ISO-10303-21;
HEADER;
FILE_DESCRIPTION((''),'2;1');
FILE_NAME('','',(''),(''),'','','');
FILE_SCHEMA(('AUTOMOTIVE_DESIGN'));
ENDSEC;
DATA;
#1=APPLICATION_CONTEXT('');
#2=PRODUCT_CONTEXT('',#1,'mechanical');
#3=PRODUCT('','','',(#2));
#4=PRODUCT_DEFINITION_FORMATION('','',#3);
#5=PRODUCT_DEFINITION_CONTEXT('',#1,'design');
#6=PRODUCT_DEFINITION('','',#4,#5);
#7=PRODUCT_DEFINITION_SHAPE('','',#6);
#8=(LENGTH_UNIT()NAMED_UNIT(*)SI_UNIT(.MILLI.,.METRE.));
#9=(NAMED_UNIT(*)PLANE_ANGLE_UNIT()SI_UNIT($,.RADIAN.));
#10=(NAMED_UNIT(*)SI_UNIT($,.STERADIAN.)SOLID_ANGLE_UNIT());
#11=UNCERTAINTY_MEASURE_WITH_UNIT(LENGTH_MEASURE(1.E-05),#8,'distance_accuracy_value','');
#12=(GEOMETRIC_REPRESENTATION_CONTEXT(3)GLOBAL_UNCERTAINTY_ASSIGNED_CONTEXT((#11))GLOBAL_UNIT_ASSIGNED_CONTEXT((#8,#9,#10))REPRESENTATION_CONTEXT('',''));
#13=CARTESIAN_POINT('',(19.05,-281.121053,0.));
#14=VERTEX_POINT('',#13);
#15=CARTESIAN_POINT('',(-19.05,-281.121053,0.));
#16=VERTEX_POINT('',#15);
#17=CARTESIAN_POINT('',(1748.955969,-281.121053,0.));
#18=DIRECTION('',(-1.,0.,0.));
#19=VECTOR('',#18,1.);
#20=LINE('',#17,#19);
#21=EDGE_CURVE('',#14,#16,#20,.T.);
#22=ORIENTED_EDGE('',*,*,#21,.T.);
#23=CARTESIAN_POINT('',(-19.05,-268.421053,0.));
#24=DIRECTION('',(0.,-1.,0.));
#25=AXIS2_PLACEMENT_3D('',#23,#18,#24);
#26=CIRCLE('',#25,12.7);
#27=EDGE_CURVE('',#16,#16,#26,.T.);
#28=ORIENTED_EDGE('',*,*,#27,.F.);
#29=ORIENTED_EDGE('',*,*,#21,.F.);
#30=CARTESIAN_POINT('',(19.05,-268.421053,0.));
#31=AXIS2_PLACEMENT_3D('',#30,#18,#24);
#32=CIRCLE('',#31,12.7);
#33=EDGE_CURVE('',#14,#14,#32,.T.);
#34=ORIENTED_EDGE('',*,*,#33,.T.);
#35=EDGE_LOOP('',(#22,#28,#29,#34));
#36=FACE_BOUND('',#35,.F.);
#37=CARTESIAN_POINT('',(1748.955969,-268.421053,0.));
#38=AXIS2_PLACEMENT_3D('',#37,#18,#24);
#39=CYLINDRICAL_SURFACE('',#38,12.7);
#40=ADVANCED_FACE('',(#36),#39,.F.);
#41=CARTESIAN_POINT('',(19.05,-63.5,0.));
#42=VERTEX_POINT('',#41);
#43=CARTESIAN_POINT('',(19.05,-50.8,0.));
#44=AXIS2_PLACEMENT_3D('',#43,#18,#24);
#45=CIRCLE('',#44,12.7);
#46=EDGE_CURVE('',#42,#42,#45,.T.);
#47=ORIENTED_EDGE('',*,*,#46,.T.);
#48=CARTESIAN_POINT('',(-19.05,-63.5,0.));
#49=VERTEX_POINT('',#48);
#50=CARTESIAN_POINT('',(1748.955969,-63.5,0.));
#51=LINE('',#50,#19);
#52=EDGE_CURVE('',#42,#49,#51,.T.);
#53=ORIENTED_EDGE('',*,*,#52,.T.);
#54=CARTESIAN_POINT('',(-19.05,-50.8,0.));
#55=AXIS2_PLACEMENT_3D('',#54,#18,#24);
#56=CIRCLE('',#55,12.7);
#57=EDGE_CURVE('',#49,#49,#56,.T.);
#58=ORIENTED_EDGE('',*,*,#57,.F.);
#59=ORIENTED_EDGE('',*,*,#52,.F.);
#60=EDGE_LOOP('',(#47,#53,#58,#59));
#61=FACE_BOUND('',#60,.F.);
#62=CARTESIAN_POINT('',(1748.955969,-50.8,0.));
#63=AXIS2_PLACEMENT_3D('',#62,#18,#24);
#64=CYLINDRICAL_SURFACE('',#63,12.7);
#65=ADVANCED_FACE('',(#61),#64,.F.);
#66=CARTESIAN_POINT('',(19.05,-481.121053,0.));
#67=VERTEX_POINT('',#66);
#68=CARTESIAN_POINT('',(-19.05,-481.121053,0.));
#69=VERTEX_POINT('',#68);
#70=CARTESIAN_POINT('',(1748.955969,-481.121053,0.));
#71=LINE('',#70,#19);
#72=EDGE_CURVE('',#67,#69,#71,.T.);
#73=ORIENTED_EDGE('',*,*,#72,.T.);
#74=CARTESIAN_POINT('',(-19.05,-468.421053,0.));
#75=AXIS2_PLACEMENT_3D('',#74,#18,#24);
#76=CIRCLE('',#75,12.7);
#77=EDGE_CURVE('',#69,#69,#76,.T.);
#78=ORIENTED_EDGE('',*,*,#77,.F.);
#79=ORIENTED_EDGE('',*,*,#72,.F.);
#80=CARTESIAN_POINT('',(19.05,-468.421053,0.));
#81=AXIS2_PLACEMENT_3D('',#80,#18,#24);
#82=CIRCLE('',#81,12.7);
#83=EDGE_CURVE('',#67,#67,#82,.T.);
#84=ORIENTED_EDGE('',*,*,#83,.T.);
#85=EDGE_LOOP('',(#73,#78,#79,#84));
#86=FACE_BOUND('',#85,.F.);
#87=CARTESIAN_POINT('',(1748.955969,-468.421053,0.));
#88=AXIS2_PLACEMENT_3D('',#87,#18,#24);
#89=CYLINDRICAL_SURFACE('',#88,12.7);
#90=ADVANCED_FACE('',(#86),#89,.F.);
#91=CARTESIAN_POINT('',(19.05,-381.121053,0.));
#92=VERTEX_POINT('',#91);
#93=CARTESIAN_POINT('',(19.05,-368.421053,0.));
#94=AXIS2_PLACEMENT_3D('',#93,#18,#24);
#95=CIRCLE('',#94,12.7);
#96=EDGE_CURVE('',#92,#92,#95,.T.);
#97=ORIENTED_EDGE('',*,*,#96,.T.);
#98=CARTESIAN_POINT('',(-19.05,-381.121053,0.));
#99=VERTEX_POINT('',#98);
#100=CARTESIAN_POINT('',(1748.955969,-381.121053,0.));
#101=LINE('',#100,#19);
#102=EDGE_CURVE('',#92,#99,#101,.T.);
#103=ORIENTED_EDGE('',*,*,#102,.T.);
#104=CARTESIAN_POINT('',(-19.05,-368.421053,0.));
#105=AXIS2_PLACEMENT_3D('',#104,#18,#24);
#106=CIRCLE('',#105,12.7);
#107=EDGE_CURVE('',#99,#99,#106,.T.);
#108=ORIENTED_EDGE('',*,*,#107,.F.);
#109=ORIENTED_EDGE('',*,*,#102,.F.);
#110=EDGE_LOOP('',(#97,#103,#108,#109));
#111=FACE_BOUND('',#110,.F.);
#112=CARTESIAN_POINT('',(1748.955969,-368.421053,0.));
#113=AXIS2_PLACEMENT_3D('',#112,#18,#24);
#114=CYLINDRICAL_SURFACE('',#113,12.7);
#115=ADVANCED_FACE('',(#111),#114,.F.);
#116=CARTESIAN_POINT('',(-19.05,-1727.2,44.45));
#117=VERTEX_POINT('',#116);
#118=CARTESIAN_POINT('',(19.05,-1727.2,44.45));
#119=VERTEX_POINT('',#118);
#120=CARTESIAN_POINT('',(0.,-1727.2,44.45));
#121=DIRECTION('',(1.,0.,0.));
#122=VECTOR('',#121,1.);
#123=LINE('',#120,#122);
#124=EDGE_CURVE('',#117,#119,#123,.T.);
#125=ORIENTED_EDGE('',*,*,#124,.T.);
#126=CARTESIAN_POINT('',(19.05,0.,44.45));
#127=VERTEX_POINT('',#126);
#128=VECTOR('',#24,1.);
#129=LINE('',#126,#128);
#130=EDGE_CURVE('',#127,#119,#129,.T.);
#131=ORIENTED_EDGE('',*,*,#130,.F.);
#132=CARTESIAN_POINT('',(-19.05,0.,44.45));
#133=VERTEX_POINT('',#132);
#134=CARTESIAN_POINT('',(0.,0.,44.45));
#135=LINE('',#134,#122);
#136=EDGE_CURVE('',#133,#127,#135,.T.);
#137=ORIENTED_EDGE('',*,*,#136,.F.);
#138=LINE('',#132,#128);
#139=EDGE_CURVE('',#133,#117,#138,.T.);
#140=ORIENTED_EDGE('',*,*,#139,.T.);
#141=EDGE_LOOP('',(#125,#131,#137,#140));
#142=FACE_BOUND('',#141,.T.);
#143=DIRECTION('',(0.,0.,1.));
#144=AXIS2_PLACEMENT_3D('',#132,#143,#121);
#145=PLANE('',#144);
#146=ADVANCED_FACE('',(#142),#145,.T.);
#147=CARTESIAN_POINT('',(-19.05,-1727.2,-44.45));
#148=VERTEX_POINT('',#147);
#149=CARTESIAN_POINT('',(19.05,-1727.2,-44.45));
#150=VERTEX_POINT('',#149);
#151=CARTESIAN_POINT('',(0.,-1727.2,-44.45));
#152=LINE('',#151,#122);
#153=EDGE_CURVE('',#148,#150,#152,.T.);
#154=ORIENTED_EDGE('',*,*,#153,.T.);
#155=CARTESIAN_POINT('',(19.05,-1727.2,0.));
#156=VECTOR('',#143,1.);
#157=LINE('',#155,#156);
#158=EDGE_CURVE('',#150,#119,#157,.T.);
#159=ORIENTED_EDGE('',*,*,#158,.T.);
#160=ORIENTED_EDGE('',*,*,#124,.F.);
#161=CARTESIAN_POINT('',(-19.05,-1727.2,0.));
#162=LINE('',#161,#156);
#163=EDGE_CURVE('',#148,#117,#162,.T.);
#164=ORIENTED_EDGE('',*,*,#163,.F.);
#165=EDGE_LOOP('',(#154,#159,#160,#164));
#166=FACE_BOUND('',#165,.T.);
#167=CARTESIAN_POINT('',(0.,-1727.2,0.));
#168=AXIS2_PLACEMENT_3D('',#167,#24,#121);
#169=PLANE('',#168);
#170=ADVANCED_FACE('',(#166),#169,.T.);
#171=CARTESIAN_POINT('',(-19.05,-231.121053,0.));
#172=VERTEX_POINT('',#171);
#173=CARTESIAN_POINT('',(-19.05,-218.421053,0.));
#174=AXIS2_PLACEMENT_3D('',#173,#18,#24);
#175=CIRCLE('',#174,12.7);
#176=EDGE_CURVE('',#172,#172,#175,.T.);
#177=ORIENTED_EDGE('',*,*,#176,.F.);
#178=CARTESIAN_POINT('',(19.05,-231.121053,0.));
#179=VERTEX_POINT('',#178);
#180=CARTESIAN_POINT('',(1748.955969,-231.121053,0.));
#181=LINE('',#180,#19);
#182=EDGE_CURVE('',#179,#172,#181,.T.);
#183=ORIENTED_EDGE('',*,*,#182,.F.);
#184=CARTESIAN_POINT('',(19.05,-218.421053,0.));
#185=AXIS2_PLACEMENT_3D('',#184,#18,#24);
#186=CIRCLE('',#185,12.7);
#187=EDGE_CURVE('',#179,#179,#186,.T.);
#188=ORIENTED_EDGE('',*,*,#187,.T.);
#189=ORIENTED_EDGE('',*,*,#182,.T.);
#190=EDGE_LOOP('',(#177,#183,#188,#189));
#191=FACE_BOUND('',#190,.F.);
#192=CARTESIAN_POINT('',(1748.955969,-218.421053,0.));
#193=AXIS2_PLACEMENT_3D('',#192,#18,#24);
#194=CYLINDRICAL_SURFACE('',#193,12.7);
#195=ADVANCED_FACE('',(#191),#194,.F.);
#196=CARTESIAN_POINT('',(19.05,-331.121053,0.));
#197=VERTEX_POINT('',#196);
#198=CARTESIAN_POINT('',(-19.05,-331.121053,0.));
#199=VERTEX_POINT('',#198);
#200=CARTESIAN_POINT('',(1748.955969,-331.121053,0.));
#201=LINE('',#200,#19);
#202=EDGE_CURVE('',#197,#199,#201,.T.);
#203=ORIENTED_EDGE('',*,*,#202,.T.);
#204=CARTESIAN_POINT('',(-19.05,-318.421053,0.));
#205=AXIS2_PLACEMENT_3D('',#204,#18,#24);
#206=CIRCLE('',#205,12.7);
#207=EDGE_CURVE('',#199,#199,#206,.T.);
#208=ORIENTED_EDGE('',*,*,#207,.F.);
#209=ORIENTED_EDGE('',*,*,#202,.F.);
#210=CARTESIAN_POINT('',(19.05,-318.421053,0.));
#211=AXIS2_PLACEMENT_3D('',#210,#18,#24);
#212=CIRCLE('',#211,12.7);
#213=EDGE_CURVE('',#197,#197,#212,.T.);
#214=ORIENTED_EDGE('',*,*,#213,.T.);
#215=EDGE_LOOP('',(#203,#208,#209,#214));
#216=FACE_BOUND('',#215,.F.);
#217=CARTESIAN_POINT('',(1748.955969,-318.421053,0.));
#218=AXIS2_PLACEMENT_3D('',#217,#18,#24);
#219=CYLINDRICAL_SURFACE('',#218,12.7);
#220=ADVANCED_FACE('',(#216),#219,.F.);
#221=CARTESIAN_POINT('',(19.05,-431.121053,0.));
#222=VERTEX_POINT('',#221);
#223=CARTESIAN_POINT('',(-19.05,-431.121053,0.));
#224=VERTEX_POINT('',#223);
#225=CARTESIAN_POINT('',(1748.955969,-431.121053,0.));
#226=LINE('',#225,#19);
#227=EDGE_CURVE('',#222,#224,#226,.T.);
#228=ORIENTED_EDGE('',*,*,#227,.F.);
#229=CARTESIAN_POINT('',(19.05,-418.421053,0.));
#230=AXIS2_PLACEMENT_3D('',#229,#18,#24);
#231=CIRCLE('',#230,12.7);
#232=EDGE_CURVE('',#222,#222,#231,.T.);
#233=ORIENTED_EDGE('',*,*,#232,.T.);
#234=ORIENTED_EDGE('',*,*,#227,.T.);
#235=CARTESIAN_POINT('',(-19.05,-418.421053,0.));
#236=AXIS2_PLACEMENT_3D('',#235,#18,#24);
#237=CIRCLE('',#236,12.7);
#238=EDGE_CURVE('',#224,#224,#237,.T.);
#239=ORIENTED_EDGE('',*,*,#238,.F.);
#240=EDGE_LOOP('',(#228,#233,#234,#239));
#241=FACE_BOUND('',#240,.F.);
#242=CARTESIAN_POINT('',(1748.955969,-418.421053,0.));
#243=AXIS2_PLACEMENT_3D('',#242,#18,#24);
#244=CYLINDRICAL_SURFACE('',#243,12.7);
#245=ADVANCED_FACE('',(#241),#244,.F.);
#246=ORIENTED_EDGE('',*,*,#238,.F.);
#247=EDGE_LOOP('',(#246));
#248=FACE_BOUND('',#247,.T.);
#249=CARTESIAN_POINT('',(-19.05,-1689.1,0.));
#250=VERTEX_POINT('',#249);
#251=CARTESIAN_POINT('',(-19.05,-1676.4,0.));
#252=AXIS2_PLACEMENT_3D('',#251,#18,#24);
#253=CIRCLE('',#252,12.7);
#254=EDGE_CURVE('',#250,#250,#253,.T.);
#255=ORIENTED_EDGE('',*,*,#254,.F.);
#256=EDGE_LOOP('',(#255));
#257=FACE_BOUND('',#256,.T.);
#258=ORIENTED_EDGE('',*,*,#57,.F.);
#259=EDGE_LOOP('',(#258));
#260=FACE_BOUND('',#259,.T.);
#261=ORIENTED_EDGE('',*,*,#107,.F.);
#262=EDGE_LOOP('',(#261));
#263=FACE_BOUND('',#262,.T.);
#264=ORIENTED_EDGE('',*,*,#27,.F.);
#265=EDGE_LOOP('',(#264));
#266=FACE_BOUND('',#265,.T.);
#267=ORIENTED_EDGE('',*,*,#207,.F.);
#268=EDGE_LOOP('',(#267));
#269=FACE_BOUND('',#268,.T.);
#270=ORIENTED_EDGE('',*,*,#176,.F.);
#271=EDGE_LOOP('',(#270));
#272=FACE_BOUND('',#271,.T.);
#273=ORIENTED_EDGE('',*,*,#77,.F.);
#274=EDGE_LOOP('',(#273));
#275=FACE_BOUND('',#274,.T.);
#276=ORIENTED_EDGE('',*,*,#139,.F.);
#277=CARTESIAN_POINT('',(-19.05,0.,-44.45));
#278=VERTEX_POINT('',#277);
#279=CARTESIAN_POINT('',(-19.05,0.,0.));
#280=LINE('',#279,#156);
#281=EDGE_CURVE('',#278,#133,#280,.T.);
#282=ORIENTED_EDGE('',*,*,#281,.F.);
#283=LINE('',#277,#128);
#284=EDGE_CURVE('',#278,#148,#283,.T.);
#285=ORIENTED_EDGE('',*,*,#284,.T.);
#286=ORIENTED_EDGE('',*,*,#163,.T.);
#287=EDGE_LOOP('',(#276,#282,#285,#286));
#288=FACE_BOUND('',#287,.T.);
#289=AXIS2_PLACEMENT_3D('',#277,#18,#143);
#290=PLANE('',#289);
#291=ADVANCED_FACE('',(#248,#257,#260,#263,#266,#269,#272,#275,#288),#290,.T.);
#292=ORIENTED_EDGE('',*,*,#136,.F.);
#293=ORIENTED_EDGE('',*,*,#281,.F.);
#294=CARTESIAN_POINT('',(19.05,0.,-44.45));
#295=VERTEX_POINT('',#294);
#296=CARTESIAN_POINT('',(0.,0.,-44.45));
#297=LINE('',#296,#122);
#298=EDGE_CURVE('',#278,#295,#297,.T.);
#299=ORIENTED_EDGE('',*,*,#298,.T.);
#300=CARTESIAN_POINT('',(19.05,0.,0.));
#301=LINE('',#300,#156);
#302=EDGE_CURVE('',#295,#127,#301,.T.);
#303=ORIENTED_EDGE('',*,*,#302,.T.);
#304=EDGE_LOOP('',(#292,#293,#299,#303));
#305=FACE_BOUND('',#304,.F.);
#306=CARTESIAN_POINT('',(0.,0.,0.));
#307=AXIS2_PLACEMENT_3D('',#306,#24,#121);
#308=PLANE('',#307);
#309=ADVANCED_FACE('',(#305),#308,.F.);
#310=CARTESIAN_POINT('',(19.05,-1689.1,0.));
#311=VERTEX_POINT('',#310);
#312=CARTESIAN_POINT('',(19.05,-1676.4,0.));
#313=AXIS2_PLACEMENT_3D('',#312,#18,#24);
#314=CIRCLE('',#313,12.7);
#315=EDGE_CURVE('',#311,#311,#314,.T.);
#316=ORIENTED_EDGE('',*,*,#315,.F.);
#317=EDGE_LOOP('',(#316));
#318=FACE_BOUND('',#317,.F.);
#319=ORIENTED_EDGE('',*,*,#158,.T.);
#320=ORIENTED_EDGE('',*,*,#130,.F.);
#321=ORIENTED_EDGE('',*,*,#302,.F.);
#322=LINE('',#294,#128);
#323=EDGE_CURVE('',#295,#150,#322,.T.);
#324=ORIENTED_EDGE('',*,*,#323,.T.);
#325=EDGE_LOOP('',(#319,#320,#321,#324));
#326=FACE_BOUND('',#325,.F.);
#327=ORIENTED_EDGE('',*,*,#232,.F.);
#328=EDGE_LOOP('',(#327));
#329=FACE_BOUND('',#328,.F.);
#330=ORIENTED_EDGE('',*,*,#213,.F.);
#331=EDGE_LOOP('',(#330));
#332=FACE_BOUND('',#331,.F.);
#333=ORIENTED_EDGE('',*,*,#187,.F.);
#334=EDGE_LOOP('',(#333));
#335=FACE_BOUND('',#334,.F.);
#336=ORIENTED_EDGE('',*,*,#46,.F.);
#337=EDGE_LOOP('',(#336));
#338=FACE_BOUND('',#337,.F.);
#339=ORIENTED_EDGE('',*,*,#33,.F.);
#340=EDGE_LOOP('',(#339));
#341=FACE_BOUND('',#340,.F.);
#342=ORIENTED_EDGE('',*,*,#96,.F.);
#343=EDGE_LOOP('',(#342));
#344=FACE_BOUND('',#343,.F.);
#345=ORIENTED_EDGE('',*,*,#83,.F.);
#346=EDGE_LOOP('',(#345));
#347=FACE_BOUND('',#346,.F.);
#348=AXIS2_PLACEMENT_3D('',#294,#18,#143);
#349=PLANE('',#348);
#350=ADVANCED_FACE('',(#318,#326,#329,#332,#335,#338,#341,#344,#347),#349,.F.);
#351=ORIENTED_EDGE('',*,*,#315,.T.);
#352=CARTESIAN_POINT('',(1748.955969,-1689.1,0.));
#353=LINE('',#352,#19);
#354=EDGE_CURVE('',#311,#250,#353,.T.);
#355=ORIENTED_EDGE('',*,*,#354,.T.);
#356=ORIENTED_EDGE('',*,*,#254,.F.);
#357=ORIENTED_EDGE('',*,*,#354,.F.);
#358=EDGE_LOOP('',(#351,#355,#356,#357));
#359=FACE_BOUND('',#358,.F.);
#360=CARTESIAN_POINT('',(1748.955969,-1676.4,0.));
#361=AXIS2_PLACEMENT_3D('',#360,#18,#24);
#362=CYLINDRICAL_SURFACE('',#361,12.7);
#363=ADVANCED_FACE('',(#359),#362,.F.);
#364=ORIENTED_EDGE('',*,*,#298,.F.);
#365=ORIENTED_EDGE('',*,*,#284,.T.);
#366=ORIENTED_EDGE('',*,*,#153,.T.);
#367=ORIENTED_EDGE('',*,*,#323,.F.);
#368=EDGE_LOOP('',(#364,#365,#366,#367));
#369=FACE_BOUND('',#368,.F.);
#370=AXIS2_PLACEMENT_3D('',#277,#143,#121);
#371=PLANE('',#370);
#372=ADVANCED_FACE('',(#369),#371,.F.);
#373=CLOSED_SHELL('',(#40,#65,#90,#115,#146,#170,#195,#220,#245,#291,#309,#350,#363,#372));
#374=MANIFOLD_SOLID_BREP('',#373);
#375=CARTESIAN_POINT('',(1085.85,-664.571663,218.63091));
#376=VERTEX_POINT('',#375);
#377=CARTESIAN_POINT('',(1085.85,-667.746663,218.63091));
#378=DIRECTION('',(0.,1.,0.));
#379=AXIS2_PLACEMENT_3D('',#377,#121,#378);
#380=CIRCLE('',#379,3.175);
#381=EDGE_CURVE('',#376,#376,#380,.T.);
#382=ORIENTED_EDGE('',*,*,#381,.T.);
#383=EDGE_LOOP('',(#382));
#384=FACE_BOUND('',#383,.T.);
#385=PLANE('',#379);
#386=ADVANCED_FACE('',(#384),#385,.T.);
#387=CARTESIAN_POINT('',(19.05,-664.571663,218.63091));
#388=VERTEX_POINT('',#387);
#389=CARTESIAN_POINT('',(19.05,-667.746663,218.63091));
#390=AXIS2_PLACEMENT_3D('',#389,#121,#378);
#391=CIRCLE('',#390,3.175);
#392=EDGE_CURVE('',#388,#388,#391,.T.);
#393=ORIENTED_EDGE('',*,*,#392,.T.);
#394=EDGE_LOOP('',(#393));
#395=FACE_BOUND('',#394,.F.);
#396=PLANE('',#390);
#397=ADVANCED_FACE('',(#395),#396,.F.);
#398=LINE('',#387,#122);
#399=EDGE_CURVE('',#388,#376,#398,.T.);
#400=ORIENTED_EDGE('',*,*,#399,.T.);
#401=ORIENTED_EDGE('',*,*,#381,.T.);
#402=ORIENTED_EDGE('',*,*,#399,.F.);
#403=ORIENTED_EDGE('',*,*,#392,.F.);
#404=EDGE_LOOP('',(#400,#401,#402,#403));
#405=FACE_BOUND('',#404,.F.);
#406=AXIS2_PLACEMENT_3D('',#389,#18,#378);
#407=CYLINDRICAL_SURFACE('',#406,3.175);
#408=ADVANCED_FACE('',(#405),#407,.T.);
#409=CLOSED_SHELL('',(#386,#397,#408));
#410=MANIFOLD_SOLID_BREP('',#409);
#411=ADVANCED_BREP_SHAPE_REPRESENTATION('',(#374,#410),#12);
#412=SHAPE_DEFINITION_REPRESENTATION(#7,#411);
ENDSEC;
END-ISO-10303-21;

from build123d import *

# Parameters (mm, degrees)
F0_W     = 38.1
F0_H     = 88.9
F1_DEPTH = 1727.2
F3_D     = 25.4
F4_R     = 3.175
F5_DEPTH = 203.2
F6_DEPTH = 1066.8


# Not quite as in the source:
# - a feature names something its author has since deleted; it is built from what else it names


with BuildPart() as f1:
    # F0 (on Front) → F1 (new body)
    with BuildSketch(Plane.XZ):
        Rectangle(F0_W, F0_H)
    extrude(amount=F1_DEPTH)

    # F3 (through all)
    with Locations(Plane.YZ.offset(19.05)):
        with Locations((-468.4210526316, 0), (-418.4210526316, 0), (-368.4210526316, 0), (-318.4210526316, 0), (-50.8, 0), (-1676.4, 0), (-268.4210526316, 0), (-218.4210526316, 0)):
            Hole(F3_D / 2)


with BuildPart() as f5:
    # F4 (on face) → F5 (new body)
    with BuildSketch(Plane.YZ.offset(19.05)):
        with Locations((-1066.8073892593, 218.6309099197)):
            Circle(F4_R)
    extrude(amount=-F5_DEPTH)


with BuildPart() as f6:
    # F4 (on face) → F6 (new body)
    with BuildSketch(Plane.YZ.offset(19.05)):
        with Locations((-667.7466630936, 218.6309099197)):
            Circle(F4_R)
    extrude(amount=F6_DEPTH)


solid = Compound([f1.part, f6.part])
